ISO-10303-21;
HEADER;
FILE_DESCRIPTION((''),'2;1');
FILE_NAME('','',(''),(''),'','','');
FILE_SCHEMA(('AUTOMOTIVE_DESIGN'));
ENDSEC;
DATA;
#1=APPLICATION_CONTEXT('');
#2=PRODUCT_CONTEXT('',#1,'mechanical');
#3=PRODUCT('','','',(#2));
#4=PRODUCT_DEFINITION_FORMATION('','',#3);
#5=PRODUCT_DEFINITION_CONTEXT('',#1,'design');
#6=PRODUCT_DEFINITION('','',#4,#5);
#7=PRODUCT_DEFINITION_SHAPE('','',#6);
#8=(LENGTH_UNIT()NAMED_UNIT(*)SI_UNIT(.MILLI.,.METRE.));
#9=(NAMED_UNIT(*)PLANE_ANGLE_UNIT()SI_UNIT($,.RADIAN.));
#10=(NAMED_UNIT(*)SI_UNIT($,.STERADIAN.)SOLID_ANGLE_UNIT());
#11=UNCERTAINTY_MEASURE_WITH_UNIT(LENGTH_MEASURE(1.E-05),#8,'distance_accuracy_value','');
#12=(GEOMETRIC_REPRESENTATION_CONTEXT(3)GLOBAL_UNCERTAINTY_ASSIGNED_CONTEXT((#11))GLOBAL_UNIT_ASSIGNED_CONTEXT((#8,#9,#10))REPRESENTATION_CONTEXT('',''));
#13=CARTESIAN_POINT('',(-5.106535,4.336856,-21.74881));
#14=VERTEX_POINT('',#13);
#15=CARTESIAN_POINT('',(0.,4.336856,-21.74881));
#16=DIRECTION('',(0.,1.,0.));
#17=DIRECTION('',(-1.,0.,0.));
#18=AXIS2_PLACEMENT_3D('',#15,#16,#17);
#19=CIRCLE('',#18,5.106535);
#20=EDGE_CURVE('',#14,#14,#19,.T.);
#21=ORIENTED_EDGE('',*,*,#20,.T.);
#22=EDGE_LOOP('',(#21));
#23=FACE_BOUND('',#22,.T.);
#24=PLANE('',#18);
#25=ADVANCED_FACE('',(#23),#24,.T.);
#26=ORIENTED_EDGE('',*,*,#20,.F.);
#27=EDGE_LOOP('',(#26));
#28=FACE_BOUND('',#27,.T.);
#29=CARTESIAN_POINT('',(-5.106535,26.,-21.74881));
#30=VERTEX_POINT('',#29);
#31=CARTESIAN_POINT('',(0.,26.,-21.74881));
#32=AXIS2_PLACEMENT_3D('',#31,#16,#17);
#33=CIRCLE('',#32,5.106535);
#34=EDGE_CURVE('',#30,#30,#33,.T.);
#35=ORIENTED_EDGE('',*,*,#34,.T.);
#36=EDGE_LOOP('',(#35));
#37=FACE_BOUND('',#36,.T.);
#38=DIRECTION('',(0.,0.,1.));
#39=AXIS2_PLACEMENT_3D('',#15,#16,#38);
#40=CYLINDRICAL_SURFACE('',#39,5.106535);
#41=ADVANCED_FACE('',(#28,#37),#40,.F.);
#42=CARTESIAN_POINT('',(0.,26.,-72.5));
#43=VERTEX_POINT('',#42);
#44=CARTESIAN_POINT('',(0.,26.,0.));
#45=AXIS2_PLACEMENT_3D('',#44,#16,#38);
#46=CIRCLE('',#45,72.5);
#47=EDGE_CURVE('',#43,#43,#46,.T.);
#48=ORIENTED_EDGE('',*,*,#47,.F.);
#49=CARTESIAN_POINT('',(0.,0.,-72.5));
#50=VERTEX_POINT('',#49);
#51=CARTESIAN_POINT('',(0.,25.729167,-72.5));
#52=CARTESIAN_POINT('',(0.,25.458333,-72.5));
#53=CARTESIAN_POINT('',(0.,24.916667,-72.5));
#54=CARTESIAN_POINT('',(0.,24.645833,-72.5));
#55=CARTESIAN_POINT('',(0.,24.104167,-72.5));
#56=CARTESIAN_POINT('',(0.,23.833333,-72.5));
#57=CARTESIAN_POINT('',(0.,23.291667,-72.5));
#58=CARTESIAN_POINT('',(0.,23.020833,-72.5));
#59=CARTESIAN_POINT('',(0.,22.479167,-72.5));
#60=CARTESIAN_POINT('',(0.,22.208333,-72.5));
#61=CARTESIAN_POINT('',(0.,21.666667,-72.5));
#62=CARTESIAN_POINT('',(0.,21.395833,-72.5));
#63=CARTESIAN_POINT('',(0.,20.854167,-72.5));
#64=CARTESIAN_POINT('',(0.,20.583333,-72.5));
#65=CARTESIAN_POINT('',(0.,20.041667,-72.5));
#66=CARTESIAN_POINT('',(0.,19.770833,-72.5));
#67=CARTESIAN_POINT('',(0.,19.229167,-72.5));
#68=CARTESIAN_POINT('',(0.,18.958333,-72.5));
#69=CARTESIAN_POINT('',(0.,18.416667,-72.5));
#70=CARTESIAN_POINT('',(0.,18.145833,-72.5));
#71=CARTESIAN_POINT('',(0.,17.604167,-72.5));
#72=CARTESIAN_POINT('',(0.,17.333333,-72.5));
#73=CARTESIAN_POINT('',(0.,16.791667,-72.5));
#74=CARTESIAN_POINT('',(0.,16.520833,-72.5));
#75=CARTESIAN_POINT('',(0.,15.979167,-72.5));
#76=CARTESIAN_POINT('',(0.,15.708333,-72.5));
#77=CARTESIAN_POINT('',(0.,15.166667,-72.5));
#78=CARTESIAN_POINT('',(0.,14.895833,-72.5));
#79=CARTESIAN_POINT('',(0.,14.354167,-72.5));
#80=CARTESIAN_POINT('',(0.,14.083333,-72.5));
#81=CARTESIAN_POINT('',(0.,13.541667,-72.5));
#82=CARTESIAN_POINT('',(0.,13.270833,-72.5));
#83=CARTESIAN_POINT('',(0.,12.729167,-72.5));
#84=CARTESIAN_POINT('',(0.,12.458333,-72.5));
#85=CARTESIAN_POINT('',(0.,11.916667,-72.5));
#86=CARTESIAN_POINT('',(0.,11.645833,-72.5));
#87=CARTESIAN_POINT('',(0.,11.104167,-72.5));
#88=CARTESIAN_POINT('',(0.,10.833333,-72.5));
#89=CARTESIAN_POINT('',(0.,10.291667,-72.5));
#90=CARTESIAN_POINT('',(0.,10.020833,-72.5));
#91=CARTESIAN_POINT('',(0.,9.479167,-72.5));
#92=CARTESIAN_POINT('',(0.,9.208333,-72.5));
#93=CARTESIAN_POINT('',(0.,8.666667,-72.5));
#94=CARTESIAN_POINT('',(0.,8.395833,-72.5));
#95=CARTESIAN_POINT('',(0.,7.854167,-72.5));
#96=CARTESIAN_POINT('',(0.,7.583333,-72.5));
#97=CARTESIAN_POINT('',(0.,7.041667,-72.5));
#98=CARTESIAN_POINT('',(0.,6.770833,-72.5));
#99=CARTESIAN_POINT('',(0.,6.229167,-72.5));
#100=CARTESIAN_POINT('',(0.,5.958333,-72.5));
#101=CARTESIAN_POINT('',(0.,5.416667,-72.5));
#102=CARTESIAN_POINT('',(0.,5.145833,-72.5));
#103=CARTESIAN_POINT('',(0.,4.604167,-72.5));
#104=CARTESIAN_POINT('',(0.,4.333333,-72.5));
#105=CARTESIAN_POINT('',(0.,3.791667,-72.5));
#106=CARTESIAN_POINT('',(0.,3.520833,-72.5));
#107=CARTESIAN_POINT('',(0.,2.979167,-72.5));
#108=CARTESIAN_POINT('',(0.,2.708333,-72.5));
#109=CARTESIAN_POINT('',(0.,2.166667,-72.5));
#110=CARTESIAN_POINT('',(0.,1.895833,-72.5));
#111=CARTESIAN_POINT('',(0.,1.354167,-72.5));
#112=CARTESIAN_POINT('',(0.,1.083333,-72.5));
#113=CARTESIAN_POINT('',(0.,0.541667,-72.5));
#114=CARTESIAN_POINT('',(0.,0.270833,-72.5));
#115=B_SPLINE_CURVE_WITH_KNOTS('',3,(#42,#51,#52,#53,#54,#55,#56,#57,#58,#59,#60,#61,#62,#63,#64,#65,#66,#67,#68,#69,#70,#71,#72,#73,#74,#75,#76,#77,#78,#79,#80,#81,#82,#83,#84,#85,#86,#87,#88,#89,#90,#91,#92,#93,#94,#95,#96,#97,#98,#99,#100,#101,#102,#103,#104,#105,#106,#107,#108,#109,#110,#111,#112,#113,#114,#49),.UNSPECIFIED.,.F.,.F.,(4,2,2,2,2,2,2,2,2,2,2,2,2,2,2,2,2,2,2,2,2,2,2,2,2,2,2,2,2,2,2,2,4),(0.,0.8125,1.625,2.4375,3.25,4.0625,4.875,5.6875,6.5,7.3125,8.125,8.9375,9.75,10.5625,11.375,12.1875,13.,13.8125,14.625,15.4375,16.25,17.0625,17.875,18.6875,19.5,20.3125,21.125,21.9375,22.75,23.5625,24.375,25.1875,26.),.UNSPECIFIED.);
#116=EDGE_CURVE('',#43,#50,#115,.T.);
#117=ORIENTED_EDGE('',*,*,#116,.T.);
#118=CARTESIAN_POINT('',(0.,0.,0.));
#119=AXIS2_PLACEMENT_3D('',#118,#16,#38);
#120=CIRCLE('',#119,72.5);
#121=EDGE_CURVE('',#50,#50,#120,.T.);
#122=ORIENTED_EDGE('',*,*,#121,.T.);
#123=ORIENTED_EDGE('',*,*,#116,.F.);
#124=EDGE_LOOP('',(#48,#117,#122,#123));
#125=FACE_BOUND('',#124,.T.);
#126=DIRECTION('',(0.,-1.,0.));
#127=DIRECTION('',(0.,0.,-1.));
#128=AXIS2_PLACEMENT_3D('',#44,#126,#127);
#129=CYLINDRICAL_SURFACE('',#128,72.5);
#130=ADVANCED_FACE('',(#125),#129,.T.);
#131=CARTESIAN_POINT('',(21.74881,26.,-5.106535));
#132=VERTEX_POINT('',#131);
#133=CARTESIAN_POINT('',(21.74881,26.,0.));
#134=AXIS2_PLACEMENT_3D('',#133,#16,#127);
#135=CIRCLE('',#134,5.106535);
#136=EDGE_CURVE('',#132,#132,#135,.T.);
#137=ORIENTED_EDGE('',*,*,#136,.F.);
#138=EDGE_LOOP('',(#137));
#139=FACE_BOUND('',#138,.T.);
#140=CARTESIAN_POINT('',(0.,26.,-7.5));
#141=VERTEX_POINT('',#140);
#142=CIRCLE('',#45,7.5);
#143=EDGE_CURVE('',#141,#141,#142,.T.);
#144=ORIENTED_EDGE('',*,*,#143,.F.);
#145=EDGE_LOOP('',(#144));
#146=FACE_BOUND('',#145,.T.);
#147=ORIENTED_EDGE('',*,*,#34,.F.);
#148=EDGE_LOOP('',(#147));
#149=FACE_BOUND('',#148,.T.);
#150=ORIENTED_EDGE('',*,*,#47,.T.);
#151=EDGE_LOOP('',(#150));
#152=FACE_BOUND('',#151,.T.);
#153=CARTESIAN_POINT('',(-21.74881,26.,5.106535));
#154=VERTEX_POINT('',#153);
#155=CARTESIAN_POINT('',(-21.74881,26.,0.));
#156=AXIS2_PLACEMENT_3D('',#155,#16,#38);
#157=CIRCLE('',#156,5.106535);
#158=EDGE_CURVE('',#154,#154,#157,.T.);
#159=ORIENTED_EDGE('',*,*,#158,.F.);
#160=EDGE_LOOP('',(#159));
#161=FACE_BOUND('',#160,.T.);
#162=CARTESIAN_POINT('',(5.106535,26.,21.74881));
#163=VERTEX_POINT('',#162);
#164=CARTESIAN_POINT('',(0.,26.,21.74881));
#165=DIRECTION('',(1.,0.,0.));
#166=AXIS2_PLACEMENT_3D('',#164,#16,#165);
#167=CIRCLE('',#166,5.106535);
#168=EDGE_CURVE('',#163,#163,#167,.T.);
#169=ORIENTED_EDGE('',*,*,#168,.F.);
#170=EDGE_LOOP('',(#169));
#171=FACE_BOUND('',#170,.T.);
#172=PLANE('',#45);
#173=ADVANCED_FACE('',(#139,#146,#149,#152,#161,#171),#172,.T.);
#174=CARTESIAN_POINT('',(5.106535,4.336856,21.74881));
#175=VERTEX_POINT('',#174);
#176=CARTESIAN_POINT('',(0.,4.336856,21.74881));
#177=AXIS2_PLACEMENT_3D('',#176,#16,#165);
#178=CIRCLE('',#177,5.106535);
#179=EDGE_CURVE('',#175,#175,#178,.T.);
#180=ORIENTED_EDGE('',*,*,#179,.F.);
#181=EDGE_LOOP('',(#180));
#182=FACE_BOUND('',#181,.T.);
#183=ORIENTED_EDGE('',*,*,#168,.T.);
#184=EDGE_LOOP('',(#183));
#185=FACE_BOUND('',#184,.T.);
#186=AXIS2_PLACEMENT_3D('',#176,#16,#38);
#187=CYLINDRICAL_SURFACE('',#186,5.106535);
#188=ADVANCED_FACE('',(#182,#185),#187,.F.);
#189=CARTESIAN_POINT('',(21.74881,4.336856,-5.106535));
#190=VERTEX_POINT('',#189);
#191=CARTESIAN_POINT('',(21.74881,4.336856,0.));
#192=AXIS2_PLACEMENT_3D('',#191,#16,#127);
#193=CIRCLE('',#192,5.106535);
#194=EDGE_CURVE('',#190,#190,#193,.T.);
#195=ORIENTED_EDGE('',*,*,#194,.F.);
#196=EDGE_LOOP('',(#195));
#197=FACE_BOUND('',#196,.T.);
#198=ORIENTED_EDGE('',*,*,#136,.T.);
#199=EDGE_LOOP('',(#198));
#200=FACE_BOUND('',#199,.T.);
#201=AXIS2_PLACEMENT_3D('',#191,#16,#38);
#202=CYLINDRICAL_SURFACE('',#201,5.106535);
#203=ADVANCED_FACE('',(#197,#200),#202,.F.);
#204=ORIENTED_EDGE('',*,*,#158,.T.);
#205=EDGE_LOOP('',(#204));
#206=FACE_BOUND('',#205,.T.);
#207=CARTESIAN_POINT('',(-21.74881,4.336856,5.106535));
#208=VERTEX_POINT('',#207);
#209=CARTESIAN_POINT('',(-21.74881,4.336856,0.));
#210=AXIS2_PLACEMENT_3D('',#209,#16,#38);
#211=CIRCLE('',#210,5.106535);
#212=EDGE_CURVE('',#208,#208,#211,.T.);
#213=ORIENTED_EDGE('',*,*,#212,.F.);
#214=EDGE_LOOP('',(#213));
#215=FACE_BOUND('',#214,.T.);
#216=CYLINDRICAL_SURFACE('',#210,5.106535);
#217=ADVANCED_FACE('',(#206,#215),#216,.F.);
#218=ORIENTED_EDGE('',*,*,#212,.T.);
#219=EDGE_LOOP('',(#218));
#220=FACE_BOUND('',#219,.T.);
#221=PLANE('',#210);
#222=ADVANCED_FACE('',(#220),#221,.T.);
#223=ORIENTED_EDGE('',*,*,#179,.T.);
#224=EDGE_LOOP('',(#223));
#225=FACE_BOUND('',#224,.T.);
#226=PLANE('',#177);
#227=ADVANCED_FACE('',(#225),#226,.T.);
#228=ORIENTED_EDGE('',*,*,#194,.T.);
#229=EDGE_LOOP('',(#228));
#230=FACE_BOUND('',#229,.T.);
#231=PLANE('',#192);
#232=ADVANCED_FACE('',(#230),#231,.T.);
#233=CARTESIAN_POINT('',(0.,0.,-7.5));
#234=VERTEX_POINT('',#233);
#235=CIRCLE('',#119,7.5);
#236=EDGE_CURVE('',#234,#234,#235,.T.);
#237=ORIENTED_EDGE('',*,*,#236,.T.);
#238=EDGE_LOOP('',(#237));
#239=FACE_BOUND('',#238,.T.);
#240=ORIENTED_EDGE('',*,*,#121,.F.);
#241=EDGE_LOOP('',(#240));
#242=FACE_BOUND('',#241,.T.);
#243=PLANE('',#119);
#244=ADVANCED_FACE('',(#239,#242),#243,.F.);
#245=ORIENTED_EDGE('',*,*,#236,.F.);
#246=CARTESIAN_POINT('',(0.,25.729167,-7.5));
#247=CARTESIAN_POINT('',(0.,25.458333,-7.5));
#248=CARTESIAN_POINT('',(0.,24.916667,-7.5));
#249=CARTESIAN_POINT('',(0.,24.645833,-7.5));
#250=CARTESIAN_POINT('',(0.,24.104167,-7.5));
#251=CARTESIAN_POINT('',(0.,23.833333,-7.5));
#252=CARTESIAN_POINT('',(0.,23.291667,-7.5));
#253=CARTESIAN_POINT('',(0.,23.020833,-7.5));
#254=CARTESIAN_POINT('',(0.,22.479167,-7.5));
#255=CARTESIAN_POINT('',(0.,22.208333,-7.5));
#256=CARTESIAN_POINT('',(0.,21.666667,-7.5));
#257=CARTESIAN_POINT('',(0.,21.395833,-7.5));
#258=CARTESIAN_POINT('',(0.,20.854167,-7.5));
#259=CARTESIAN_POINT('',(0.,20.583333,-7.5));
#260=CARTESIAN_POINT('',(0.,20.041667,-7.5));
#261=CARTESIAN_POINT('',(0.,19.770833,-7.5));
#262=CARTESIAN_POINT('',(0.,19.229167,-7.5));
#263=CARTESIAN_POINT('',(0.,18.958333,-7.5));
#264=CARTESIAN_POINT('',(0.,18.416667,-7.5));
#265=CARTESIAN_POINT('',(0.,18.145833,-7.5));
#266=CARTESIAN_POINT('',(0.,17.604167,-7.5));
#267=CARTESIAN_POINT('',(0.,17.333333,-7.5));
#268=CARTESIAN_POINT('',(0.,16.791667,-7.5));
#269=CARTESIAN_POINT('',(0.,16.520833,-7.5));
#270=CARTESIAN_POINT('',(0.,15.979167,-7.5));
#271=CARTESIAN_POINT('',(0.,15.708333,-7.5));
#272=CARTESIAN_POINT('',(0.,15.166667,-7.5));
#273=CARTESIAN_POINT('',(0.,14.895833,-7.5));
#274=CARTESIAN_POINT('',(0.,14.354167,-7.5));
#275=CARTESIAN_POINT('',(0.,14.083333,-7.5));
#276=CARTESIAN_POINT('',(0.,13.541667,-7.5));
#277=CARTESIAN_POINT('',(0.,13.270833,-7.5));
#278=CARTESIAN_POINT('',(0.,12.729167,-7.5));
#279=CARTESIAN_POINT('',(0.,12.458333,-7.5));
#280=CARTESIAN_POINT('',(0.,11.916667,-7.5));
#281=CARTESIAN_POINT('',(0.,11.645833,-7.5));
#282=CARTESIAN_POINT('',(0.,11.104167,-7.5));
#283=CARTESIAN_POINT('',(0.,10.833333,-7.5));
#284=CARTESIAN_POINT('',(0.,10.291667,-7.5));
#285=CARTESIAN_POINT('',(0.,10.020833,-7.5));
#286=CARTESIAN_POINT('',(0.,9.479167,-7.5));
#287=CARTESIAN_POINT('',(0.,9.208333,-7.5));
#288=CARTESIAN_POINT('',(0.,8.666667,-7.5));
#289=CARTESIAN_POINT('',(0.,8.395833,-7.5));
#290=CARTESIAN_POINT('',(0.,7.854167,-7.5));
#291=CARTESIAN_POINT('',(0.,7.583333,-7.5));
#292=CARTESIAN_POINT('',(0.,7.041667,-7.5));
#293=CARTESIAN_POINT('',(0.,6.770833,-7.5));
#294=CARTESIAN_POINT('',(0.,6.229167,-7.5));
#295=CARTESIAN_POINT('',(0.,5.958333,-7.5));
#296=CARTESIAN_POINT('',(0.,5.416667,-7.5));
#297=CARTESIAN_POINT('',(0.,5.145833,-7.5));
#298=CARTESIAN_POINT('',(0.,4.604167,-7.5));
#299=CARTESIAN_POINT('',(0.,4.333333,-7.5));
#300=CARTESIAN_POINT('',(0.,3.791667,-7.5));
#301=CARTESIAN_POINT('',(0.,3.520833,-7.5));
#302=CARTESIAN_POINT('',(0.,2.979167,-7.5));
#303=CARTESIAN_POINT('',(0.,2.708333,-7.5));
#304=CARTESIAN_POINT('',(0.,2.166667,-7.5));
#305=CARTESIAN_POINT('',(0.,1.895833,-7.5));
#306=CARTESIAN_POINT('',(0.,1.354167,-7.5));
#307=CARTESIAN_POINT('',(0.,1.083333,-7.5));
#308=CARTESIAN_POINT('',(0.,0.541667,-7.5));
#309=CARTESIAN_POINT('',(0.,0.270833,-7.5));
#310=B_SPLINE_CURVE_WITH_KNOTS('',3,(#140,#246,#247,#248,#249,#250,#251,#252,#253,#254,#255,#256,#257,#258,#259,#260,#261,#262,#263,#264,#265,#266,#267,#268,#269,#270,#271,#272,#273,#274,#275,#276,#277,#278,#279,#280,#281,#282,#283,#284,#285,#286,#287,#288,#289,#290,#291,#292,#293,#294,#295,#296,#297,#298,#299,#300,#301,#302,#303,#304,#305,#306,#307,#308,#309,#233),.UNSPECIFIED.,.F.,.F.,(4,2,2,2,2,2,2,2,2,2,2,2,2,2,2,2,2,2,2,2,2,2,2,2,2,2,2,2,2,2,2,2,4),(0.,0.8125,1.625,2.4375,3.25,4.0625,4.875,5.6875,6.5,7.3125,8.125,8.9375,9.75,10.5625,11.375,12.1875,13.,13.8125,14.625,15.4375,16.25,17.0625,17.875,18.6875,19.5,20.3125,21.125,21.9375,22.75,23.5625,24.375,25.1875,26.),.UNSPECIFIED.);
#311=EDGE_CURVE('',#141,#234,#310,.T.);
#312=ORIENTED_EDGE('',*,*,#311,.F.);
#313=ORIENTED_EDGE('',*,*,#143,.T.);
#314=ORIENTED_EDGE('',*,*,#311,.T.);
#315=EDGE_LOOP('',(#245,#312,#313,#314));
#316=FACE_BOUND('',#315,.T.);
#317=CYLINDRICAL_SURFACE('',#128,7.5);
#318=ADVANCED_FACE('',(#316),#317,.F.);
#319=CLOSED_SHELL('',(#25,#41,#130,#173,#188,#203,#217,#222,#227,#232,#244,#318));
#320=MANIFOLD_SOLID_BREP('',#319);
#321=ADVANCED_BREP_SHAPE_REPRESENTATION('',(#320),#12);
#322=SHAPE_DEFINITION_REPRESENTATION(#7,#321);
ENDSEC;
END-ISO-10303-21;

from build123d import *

# Parameters (mm, degrees)
SKETCH1_R           = 72.5
BOSS_EXTRUDE1_DEPTH = 26
SKETCH2_R           = 7.5
CUT_EXTRUDE1_DEPTH  = 106.775706095
SKETCH3_R           = 5.106535471
CUT_EXTRUDE2_DEPTH  = 21.663143679
CIRPATTERN1_COUNT   = 4


with BuildPart() as part:
    # Sketch1 → Boss-Extrude1 (new body)
    with BuildSketch(Plane(origin=(0, 0, 0), x_dir=(1, 0, 0), z_dir=(0, 1, 0))):
        Circle(SKETCH1_R)
    extrude(amount=BOSS_EXTRUDE1_DEPTH)

    # Sketch2 → Cut-Extrude1 (cut, through all)
    with BuildSketch(Plane(origin=(0, 0, 0), x_dir=(1, 0, 0), z_dir=(0, 1, 0))):
        Circle(SKETCH2_R)
    extrude(amount=CUT_EXTRUDE1_DEPTH, mode=Mode.SUBTRACT)

    # Sketch3 → Cut-Extrude2 (cut)
    with BuildSketch(Plane(origin=(0, 26, 0), x_dir=(1, 0, 0), z_dir=(0, 1, 0))):
        with Locations((-21.748809965, 0)):
            Circle(SKETCH3_R)
    cut_extrude2 = extrude(amount=-CUT_EXTRUDE2_DEPTH, mode=Mode.SUBTRACT)

    # CirPattern1: Cut-Extrude2 ×4 about axis
    cirpattern1_axis = Axis((0, 0, 0), (0, 1, 0))
    for i in range(1, CIRPATTERN1_COUNT):
        add(cut_extrude2.rotate(cirpattern1_axis, i * 360 / CIRPATTERN1_COUNT), mode=Mode.SUBTRACT)


solid = part.part
